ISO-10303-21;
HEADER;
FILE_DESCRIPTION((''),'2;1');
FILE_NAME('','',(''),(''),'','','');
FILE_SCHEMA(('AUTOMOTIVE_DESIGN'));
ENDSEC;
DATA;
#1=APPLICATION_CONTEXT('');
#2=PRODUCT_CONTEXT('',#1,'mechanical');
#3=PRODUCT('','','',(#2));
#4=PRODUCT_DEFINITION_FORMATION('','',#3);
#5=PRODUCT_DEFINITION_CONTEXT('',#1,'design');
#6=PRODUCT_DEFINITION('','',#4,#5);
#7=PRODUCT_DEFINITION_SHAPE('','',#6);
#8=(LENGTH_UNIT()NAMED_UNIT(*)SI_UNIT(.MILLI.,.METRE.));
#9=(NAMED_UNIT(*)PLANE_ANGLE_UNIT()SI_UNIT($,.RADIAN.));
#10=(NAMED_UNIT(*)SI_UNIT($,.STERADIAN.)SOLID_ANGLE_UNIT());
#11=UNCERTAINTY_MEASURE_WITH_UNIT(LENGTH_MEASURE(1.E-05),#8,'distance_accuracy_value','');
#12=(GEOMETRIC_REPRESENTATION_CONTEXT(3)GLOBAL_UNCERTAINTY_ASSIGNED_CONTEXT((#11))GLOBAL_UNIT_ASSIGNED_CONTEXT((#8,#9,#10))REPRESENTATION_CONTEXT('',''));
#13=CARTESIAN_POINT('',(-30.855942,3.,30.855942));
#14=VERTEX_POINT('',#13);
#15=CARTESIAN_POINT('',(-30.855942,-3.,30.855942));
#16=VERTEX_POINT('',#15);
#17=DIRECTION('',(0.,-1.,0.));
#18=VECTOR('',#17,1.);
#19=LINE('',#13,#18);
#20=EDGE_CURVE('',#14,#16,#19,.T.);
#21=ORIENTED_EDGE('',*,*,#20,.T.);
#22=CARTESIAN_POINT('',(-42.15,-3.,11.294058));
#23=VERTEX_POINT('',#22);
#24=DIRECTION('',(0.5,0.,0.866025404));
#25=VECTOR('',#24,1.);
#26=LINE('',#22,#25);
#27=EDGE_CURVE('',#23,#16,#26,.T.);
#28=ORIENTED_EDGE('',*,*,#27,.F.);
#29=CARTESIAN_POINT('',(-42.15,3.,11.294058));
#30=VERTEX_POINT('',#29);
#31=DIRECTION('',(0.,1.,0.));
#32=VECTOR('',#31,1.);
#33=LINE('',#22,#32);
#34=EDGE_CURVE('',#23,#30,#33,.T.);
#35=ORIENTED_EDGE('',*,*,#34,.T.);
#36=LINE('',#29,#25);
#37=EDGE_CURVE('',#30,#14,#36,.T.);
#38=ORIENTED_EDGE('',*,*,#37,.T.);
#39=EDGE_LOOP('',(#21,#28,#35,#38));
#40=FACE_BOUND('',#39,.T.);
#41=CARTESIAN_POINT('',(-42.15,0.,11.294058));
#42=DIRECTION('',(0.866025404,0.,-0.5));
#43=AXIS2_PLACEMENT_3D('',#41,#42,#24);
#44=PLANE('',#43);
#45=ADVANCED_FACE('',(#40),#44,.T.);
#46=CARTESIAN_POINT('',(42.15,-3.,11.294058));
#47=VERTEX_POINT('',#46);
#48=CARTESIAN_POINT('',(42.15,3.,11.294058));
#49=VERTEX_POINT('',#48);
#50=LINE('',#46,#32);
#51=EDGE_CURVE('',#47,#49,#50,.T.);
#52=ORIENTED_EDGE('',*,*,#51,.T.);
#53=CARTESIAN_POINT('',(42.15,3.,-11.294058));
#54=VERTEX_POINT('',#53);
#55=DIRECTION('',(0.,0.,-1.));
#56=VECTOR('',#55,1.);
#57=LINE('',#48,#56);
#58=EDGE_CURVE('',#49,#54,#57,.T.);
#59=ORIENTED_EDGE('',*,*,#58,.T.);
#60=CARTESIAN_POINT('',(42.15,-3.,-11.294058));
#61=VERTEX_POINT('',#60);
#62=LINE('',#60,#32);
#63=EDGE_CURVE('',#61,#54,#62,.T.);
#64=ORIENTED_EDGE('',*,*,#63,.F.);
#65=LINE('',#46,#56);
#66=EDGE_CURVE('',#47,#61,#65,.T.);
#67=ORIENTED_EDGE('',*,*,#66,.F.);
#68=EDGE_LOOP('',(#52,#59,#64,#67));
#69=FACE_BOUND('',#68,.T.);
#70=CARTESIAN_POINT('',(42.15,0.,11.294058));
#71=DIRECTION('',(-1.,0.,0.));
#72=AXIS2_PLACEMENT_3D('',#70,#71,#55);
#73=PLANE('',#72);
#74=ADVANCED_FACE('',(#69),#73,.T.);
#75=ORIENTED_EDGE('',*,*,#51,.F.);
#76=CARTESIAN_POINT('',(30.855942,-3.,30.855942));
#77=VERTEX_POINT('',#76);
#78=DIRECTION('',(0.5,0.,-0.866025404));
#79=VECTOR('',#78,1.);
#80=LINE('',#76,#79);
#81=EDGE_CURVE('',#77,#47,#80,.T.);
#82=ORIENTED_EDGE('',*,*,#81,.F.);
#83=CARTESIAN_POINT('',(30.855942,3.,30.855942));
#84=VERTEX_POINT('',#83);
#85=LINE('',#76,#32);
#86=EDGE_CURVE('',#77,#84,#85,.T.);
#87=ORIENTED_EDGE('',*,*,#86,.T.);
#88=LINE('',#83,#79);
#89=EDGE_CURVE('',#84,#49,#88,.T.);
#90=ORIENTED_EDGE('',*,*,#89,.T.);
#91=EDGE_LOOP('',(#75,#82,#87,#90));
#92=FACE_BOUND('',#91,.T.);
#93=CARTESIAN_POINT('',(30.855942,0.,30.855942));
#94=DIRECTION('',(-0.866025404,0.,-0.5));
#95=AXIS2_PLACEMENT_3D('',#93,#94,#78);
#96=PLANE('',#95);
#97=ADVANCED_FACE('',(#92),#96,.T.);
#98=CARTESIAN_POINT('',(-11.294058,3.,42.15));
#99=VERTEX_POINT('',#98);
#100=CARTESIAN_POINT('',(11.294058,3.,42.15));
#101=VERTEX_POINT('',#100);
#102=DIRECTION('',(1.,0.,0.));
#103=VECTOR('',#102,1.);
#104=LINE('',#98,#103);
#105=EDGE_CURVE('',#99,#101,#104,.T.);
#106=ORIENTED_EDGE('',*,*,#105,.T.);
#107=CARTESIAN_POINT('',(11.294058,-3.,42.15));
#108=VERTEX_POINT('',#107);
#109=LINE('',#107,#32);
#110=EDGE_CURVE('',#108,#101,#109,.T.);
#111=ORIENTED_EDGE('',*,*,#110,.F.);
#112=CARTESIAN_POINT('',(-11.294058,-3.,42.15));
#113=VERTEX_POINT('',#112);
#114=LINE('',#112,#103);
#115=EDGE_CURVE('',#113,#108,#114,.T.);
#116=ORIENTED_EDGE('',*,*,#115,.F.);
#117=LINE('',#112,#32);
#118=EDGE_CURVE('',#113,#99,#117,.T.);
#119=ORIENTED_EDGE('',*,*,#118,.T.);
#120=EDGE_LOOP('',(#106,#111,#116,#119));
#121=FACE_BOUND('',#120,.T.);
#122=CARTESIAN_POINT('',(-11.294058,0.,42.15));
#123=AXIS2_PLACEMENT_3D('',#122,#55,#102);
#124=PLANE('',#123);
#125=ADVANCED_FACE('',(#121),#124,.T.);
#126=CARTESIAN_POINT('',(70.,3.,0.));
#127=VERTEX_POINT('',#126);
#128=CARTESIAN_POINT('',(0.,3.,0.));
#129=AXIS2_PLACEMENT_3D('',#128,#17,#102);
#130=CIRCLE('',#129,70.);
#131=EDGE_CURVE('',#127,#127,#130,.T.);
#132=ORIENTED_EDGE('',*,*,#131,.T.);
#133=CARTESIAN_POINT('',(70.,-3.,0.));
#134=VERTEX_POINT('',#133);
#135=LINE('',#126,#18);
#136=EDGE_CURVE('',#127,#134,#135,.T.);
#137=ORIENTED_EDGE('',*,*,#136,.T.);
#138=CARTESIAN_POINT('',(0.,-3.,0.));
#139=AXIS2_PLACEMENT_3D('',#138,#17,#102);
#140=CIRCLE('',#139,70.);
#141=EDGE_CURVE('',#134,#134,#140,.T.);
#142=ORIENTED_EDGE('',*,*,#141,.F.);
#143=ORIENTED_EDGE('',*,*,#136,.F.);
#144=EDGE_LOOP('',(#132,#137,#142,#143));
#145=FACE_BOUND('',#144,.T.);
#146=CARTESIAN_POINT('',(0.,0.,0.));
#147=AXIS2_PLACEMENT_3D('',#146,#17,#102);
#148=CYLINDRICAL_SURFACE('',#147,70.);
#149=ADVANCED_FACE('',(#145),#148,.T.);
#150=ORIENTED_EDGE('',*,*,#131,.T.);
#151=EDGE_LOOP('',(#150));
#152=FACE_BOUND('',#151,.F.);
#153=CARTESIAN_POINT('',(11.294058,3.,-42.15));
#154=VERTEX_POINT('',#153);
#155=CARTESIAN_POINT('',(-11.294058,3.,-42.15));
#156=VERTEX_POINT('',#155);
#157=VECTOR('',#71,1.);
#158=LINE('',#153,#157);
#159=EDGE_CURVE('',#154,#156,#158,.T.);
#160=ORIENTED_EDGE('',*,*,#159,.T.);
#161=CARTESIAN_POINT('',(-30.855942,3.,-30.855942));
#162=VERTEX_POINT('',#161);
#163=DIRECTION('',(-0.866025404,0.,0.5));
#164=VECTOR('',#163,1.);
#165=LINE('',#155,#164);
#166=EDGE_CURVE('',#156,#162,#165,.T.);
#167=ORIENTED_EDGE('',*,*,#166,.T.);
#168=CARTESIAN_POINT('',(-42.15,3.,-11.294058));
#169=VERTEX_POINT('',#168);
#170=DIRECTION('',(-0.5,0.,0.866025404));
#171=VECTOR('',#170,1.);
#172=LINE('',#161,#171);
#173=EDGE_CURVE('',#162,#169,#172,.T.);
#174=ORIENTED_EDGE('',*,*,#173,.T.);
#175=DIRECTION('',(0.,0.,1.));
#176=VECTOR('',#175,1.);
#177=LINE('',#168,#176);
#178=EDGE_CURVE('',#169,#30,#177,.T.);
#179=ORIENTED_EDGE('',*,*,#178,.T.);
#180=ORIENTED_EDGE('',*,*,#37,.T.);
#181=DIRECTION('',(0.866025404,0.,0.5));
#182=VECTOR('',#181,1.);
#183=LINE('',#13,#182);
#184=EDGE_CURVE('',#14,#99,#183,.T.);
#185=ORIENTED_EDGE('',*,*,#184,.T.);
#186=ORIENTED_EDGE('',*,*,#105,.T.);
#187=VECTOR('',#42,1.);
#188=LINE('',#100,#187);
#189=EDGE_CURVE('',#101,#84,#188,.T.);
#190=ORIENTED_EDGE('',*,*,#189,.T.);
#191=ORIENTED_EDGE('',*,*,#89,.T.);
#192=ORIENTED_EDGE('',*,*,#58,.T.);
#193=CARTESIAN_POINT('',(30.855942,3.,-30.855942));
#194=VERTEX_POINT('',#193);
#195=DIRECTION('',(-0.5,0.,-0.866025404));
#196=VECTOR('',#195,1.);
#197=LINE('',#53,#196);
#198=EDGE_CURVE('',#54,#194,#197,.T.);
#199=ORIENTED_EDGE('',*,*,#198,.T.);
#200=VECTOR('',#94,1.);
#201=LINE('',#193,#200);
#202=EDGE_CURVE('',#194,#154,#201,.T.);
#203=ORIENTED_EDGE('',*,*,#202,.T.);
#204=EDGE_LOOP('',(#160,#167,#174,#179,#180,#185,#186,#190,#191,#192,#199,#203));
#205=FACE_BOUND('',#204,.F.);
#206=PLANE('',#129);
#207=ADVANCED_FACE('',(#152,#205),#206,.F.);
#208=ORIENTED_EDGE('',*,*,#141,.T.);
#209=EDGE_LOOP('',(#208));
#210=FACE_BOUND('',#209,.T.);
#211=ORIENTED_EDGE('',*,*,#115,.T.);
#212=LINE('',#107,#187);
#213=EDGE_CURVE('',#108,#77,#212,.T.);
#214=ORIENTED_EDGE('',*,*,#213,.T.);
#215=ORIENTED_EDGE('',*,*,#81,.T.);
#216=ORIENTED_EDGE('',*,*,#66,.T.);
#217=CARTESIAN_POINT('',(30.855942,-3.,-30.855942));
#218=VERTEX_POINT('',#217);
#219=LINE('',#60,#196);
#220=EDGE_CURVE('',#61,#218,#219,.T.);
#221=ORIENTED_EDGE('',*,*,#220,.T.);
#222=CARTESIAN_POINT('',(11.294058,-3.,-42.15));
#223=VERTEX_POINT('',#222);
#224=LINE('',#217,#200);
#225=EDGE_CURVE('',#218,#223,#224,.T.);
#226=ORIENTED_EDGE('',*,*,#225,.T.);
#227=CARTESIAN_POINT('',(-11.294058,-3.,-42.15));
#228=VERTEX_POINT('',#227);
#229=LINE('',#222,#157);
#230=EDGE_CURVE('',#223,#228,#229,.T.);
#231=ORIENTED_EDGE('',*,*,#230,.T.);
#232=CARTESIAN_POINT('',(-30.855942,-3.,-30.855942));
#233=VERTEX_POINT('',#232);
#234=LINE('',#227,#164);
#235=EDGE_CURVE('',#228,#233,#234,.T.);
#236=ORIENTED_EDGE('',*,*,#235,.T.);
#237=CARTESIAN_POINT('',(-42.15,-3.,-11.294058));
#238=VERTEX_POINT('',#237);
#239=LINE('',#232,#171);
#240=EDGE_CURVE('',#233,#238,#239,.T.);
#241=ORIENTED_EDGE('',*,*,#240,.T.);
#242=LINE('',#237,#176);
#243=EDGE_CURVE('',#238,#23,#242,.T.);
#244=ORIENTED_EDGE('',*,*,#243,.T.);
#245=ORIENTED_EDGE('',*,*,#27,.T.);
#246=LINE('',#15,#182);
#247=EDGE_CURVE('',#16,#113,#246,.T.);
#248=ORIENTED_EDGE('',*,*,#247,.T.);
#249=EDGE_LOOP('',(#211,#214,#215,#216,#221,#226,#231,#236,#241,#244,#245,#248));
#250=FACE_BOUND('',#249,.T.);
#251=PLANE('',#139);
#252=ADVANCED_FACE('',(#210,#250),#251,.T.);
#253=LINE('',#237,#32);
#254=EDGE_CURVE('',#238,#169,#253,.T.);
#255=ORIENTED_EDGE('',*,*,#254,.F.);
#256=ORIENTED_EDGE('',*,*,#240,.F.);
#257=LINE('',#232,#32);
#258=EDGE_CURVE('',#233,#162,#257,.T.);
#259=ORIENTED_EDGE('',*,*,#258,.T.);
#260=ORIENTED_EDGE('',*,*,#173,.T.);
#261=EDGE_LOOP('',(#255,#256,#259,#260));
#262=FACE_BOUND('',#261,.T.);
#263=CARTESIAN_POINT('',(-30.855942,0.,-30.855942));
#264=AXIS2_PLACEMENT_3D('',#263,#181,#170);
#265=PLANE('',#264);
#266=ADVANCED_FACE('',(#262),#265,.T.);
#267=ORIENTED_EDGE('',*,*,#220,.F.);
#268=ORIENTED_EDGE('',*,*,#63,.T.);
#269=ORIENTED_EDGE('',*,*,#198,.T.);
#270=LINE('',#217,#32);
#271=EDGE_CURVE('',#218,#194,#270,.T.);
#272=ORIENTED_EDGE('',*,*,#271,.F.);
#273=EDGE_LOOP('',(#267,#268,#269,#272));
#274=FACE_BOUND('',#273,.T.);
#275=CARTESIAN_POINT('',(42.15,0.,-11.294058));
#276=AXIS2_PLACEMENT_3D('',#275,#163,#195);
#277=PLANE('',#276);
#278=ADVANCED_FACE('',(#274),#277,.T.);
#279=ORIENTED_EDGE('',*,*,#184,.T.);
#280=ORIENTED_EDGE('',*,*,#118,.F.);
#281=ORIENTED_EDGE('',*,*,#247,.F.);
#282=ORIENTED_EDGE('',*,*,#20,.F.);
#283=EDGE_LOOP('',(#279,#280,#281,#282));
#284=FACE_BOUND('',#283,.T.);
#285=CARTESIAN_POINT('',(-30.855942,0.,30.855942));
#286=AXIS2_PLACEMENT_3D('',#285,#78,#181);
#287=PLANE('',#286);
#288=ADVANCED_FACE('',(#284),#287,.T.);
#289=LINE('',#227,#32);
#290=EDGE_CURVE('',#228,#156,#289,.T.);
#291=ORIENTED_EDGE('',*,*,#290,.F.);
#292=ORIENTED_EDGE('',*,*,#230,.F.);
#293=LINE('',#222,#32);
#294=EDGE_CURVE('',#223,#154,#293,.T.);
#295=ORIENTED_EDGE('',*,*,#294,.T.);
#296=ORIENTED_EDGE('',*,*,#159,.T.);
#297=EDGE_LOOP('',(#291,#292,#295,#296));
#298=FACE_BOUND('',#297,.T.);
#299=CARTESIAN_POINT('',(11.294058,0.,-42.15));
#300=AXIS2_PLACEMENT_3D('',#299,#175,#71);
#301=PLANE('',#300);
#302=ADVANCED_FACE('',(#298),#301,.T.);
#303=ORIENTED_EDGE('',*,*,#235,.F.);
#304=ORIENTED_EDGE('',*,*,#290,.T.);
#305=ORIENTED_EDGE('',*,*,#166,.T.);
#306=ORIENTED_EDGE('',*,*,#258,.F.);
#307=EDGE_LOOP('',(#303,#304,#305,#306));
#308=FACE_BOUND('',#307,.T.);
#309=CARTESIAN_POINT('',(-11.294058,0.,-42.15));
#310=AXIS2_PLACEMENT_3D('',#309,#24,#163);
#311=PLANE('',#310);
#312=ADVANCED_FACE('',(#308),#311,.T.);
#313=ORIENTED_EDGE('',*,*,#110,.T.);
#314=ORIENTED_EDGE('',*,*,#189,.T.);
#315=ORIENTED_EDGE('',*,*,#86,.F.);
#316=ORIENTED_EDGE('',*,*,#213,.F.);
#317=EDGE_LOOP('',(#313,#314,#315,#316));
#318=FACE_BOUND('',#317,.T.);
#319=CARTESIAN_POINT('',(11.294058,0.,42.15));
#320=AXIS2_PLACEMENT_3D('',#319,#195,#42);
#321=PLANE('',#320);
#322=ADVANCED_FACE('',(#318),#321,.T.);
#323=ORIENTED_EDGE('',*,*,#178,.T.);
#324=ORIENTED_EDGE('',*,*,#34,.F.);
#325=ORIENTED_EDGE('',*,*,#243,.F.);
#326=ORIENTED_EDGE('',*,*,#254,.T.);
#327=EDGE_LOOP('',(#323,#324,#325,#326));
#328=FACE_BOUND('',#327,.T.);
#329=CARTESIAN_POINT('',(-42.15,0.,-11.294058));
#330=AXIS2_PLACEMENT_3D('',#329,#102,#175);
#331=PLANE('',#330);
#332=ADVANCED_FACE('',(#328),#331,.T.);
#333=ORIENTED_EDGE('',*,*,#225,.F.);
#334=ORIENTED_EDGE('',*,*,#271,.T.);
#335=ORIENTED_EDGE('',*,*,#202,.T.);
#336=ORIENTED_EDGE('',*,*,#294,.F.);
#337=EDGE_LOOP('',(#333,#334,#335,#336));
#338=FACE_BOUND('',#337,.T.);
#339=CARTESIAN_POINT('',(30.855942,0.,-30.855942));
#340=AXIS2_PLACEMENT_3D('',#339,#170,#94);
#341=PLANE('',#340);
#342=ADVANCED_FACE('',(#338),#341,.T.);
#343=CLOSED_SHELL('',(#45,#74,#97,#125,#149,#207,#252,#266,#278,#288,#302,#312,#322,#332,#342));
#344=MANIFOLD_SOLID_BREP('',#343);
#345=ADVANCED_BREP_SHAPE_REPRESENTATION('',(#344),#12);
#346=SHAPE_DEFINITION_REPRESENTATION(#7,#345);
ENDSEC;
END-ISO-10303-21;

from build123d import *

# Parameters (mm, degrees)
F0_R     = 70
F1_DEPTH = 3


# Not quite as in the source:
# - a feature of the source that left no trace in its solid (it failed there, or was rolled back) is left out


with BuildPart() as f1:
    # F0 (on Front) → F1 (new body, symmetric)
    with BuildSketch(Plane.XZ):
        Circle(F0_R)
        Polygon((-30.855941539, 30.855941539), (-11.294058461, 42.15), (11.294058461, 42.15), (30.855941539, 30.855941539), (42.15, 11.294058461), (42.15, -11.294058461), (30.855941539, -30.855941539), (11.294058461, -42.15), (-11.294058461, -42.15), (-30.855941539, -30.855941539), (-42.15, -11.294058461), (-42.15, 11.294058461), align=None, mode=Mode.SUBTRACT)
    extrude(amount=F1_DEPTH, both=True)


solid = f1.part
